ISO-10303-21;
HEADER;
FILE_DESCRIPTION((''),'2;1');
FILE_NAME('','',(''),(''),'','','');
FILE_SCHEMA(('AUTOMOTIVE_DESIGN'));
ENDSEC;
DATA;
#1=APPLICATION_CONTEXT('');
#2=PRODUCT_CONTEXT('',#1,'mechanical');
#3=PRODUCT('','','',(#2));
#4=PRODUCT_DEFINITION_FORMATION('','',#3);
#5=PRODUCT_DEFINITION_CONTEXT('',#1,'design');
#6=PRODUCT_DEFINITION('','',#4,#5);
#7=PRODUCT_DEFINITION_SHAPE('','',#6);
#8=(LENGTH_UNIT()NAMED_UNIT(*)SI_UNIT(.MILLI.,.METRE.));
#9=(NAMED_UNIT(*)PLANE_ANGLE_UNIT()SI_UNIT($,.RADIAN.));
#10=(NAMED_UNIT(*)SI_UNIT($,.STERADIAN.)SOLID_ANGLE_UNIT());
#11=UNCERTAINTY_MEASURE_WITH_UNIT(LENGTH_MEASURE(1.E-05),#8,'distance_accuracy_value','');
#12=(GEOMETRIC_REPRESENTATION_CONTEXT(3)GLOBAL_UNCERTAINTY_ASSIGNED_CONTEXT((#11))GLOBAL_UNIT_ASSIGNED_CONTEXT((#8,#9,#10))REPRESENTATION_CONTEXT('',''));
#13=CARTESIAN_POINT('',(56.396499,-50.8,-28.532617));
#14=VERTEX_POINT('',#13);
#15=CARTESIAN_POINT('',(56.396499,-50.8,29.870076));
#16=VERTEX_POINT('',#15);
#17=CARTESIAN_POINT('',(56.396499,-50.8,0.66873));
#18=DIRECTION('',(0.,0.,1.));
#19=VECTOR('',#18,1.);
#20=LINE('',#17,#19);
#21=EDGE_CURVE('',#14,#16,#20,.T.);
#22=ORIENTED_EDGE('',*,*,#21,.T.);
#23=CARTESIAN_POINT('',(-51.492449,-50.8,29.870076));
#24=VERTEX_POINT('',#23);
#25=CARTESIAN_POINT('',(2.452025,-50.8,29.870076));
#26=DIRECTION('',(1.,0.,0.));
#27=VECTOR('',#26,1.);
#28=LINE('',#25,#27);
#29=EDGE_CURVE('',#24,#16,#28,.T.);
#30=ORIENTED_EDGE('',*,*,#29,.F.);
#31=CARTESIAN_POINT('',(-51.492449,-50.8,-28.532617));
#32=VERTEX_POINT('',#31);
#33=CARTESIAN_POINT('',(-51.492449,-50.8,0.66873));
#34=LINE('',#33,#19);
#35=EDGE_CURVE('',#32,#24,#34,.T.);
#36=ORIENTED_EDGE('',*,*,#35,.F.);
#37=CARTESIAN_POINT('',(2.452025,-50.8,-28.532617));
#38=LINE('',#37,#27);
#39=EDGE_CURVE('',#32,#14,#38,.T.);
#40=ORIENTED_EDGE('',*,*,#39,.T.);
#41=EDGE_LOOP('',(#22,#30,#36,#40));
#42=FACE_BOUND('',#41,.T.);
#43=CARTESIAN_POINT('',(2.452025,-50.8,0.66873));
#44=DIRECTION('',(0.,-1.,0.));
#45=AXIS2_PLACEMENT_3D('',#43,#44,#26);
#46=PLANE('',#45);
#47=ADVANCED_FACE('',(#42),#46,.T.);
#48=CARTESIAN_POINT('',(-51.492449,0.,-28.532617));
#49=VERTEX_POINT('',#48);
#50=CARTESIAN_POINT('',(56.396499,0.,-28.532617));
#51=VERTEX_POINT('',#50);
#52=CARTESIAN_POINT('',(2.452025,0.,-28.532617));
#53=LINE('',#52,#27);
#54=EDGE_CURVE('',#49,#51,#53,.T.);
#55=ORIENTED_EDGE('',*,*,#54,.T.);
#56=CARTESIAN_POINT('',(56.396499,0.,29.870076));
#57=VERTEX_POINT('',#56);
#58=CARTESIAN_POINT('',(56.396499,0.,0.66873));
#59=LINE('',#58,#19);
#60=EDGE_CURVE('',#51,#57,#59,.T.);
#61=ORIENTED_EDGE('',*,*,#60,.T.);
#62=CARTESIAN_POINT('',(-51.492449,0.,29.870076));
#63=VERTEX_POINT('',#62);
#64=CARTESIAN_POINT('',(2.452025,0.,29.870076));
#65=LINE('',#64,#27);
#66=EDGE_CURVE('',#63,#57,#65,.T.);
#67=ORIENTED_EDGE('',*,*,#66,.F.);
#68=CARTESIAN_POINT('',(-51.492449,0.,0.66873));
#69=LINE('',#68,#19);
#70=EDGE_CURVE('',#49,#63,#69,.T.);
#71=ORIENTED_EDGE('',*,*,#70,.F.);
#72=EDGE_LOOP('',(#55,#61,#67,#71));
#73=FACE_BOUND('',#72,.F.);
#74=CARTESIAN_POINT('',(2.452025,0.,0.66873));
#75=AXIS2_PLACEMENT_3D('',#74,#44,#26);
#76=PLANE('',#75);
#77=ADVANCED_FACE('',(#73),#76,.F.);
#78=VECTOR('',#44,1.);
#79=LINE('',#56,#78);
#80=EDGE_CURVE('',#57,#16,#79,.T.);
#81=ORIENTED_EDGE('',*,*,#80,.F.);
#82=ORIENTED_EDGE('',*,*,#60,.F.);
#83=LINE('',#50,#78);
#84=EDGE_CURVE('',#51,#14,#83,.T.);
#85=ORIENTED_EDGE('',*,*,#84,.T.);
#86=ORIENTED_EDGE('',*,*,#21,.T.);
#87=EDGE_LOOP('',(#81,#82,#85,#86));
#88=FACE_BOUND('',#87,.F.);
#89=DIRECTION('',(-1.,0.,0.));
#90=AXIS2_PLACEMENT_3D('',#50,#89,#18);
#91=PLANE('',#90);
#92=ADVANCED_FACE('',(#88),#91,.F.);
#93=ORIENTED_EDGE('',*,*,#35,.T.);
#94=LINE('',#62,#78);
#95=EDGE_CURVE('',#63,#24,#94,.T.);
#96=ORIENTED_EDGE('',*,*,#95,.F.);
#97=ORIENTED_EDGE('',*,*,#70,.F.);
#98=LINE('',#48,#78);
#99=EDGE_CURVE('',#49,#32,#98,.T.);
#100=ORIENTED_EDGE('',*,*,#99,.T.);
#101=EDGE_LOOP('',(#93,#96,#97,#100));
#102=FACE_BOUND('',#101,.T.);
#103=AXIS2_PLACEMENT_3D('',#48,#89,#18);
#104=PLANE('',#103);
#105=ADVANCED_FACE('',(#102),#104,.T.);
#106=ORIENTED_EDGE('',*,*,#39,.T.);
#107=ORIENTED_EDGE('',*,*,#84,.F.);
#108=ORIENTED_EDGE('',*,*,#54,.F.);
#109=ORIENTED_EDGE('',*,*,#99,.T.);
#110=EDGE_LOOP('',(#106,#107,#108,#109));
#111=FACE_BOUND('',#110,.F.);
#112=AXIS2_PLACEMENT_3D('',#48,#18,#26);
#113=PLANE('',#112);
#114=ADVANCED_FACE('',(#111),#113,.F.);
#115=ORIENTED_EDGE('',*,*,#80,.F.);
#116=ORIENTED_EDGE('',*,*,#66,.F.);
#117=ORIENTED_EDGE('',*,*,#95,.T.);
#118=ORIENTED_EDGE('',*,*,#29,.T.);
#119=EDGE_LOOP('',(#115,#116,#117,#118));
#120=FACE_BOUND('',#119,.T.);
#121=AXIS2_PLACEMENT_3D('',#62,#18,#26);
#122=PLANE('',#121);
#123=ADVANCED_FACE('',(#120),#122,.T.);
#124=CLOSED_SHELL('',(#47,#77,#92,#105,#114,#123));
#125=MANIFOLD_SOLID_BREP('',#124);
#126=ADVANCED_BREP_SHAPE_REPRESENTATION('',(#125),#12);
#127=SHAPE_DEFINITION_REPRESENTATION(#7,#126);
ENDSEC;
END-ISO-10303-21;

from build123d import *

# Parameters (mm, degrees)
F0_W     = 107.8889481723
F0_H     = 58.4026928991
F1_DEPTH = 50.8


# Not quite as in the source:
# - a feature of the source that left no trace in its solid (it failed there, or was rolled back) is left out


with BuildPart() as f1:
    # F0 (on Front) → F1 (new body)
    with BuildSketch(Plane.XZ):
        with Locations((2.45202519, 0.6687296554)):
            Rectangle(F0_W, F0_H)
    extrude(amount=F1_DEPTH)


solid = f1.part
